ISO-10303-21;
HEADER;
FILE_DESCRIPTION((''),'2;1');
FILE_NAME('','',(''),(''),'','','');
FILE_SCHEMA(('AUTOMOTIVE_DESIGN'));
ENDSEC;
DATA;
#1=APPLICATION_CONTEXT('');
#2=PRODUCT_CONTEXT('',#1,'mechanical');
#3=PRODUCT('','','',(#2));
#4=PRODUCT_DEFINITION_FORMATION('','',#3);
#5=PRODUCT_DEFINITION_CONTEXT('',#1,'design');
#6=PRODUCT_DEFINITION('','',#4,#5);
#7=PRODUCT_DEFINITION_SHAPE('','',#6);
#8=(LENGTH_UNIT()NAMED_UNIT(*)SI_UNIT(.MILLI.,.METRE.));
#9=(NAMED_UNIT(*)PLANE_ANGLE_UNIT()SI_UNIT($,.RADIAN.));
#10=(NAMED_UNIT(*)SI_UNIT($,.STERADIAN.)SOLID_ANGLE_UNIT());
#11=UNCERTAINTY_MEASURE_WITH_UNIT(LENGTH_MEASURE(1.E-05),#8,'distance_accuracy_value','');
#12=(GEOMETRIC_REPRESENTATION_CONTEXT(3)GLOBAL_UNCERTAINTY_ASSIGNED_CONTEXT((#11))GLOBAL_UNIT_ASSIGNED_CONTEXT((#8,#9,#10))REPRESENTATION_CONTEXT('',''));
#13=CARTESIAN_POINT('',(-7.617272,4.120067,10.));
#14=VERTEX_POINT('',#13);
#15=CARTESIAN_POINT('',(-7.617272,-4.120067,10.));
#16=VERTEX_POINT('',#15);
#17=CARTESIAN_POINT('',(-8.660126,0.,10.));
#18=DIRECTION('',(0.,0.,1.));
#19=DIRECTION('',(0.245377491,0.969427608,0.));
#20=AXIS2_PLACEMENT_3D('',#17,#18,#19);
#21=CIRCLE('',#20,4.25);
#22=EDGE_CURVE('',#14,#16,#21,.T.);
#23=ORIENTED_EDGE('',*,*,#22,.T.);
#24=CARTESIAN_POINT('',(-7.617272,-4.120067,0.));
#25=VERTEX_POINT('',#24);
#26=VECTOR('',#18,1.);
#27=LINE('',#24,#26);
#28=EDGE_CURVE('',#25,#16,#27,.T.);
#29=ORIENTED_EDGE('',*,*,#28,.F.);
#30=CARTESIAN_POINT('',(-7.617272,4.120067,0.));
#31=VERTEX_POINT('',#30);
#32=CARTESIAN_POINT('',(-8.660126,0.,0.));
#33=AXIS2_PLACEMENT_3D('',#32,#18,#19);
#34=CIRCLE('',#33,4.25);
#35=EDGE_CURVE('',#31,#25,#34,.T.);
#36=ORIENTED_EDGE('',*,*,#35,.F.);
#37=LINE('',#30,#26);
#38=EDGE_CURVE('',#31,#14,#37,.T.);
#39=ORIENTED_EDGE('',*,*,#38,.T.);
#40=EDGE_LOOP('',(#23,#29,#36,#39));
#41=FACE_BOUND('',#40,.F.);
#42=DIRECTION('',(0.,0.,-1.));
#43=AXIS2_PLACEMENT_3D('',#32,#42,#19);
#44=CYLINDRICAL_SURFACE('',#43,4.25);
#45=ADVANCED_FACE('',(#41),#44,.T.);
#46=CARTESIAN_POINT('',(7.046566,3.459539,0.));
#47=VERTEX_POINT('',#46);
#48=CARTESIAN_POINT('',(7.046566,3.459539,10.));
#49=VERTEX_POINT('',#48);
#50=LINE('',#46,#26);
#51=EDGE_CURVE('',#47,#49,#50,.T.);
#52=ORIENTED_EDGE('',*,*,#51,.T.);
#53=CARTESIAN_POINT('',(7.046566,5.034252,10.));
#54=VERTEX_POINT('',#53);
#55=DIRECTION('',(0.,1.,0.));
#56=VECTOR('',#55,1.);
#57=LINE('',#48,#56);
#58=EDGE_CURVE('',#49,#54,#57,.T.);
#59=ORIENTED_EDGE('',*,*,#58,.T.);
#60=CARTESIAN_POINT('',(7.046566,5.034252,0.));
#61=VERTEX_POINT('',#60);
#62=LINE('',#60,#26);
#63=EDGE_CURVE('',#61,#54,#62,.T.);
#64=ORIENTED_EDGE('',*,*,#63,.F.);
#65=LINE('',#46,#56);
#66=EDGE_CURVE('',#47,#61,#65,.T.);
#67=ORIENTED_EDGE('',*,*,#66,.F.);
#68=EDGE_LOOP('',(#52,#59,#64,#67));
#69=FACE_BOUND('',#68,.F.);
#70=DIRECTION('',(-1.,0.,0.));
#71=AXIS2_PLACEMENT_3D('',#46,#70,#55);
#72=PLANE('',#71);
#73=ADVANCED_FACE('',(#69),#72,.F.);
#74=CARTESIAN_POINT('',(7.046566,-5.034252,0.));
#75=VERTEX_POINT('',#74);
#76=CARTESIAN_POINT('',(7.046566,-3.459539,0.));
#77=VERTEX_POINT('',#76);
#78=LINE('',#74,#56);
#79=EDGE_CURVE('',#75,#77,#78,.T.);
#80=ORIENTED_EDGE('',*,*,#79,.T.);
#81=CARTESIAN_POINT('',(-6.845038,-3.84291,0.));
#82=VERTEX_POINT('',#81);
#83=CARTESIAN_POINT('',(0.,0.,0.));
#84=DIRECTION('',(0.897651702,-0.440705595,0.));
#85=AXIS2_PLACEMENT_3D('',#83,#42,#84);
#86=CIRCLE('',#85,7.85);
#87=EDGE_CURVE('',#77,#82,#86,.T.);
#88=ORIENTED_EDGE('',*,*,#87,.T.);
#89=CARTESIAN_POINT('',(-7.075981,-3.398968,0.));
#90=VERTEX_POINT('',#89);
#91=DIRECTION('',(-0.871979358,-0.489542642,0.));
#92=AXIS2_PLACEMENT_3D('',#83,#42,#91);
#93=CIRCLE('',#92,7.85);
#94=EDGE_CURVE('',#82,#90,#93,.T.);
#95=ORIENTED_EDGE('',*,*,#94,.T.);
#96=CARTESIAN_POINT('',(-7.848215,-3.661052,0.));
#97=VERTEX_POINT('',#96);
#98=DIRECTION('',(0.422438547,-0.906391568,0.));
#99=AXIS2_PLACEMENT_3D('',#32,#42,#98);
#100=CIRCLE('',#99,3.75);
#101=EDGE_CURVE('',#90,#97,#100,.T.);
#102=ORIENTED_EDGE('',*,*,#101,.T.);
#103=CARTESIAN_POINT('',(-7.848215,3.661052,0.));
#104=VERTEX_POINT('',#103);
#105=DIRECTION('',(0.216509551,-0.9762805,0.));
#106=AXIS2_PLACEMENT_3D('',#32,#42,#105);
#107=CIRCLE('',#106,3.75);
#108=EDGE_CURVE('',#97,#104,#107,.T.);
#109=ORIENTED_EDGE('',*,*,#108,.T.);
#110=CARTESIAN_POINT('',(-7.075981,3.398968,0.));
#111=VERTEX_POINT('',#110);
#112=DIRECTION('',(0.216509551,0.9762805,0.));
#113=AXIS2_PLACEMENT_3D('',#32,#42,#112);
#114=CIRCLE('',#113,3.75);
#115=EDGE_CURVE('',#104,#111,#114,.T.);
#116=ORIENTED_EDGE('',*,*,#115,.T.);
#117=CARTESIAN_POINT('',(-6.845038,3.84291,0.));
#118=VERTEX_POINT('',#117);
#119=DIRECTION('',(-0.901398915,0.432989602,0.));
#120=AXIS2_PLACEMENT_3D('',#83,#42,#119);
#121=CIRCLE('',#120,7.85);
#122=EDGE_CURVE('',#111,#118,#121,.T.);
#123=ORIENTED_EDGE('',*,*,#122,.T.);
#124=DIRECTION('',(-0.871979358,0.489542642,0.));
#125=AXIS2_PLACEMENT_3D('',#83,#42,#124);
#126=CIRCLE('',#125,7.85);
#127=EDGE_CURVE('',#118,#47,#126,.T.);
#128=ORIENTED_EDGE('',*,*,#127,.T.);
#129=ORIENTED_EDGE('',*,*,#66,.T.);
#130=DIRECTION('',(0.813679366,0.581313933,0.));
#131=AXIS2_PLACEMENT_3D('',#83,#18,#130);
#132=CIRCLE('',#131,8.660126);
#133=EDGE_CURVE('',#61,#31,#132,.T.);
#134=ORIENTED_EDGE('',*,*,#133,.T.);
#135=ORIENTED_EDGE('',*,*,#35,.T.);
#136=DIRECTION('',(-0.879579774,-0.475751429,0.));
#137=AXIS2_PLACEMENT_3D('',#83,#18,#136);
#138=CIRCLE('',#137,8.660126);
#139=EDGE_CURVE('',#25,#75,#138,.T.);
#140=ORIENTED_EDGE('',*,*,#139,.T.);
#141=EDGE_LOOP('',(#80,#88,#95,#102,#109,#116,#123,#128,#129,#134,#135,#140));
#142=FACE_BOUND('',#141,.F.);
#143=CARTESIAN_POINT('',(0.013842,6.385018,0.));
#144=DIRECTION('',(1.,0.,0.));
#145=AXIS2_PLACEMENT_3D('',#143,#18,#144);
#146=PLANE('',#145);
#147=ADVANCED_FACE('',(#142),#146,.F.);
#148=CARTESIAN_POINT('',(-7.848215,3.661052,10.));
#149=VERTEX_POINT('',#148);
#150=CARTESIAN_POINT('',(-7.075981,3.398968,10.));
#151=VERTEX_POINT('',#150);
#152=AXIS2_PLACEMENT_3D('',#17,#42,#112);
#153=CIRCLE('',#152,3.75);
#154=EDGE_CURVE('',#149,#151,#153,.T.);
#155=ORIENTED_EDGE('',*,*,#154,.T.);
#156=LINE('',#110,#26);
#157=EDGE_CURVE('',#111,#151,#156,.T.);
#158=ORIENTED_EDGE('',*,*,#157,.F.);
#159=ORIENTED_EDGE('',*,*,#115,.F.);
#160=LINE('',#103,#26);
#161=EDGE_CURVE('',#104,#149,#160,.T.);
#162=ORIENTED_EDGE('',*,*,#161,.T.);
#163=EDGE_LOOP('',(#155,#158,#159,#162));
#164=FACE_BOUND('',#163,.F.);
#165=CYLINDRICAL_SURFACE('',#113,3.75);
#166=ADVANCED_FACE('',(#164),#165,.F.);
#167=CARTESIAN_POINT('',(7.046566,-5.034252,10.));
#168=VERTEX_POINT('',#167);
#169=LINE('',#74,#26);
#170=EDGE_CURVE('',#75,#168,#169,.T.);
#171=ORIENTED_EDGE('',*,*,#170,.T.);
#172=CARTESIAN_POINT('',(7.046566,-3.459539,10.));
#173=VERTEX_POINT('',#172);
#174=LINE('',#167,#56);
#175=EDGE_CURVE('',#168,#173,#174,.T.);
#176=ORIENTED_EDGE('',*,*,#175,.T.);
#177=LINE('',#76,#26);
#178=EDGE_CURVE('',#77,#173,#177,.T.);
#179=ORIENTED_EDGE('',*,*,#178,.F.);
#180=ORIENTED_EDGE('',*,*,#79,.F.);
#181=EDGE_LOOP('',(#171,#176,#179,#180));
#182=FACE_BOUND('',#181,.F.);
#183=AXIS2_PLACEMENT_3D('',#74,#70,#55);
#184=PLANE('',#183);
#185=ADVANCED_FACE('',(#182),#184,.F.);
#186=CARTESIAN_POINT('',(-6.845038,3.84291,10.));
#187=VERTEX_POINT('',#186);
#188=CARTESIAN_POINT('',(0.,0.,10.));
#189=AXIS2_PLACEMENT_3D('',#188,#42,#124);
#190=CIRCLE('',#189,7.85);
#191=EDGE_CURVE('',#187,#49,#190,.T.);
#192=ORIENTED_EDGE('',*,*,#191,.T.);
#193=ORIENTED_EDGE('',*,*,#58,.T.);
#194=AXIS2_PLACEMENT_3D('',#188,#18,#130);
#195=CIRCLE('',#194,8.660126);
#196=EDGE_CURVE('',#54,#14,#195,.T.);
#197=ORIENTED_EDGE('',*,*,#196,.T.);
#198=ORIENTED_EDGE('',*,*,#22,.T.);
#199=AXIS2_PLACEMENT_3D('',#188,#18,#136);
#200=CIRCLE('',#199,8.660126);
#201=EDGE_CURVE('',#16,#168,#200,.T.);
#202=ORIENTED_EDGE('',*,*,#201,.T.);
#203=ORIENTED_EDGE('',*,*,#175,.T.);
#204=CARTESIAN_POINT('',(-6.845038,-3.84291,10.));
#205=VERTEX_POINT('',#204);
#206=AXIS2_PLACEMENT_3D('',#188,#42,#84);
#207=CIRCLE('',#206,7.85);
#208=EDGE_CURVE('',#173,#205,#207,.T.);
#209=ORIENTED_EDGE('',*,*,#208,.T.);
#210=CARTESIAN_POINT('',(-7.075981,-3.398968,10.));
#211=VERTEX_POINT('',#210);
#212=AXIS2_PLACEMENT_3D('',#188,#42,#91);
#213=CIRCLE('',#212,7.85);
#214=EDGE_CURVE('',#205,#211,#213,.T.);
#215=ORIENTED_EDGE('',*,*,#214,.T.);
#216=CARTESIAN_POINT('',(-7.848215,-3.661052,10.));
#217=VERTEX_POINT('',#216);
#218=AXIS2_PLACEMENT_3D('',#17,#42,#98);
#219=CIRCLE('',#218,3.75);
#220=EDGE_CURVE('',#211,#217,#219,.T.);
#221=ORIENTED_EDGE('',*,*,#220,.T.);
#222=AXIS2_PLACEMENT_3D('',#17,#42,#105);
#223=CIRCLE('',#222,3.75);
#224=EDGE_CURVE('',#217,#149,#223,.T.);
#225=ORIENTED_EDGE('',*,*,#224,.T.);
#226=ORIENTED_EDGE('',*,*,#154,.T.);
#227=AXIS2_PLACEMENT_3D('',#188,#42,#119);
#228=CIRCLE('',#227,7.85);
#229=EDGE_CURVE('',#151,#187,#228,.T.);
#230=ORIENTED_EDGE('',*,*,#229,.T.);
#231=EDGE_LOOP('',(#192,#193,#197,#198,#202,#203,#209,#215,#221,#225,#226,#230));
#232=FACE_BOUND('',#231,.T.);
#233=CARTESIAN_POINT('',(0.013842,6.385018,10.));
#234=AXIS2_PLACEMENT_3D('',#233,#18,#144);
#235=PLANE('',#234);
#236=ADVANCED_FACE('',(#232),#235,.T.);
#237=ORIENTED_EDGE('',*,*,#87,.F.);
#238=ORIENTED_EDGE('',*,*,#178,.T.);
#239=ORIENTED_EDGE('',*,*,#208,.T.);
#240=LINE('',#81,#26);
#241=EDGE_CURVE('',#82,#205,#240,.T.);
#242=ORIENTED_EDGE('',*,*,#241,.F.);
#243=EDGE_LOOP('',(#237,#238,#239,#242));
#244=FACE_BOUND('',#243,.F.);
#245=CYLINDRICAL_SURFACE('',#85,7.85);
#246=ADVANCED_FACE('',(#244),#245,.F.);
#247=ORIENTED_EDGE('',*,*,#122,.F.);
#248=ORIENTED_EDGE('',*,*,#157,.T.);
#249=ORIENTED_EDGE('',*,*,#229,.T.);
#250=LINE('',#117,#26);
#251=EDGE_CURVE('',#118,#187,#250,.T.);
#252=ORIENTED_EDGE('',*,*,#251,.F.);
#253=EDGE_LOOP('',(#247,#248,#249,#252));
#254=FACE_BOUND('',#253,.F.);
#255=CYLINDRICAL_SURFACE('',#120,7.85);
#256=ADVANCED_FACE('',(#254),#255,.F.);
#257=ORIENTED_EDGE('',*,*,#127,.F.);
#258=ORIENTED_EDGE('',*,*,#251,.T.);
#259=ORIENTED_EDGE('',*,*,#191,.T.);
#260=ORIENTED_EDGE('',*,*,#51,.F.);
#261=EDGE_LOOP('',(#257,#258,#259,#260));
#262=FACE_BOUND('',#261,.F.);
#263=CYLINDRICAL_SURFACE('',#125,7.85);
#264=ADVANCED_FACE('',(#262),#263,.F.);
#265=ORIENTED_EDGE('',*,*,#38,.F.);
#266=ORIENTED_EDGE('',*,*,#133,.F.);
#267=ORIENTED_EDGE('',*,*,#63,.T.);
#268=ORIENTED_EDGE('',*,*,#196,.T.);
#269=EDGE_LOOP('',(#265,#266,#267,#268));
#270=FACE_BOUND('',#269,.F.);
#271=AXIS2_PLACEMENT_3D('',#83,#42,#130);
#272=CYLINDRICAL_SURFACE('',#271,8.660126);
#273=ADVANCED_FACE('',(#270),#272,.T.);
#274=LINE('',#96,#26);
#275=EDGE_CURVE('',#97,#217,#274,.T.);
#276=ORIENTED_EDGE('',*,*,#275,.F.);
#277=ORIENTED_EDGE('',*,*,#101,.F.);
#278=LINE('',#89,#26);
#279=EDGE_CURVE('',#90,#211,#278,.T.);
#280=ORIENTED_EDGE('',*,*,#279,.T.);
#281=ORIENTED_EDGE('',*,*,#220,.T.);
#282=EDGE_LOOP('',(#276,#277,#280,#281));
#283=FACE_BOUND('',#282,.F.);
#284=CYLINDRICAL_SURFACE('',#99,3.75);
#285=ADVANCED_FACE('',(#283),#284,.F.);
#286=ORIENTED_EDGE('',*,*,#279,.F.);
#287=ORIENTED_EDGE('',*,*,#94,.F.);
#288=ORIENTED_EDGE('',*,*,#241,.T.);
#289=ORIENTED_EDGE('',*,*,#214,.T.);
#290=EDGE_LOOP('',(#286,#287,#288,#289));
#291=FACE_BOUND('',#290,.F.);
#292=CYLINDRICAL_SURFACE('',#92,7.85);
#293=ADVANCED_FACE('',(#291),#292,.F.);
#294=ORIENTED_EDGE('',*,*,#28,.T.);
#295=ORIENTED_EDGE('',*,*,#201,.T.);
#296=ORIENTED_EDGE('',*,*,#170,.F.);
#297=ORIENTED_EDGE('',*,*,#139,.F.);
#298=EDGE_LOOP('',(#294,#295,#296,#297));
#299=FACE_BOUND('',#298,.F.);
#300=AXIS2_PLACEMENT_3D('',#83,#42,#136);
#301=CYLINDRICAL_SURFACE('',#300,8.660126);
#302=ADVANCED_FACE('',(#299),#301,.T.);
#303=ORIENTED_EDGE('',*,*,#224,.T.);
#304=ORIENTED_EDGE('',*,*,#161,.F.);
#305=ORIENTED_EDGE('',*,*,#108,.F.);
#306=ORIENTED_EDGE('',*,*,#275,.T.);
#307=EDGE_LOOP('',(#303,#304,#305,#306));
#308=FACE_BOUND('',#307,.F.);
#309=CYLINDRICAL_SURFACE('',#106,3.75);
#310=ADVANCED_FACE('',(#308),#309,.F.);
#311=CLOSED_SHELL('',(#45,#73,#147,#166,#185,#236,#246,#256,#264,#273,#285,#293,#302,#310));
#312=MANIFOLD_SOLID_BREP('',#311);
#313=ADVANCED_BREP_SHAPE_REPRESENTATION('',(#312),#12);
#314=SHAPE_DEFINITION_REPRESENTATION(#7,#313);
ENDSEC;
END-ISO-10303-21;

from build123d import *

# Parameters (mm, degrees)
F1_DEPTH = 10
F6_DEPTH = 10


# Not quite as in the source:
# - a feature names something its author has since deleted; it is built from what else it names


with BuildPart() as f1:
    # F0 (on Top) → F1 (new body)
    with BuildSketch(Plane.XY):
        with BuildLine():
            ThreePointArc((-7.0759814838, 3.3989683789), (-6.9640481468, 3.6227797903), (-6.8450379627, 3.8429097425))
            ThreePointArc((-6.8450379627, 3.8429097425), (-7.2244510067, 4.0001671481), (-7.6172716975, 4.1200673333))
            ThreePointArc((-7.6172716975, 4.1200673333), (-7.7361486016, 3.8922728268), (-7.8482152186, 3.6610518743))
            ThreePointArc((-7.8482152186, 3.6610518743), (-7.4549529061, 3.5510643093), (-7.0759814838, 3.3989683789))
        make_face()
        with BuildLine():
            ThreePointArc((-7.6172716975, -4.1200673333), (-7.2244510067, -4.0001671481), (-6.8450379627, -3.8429097425))
            ThreePointArc((-6.8450379627, -3.8429097425), (-6.9640481468, -3.6227797903), (-7.0759814838, -3.3989683789))
            ThreePointArc((-7.0759814838, -3.3989683789), (-7.4549529061, -3.5510643093), (-7.8482152186, -3.6610518743))
            ThreePointArc((-7.8482152186, -3.6610518743), (-7.7361486016, -3.8922728268), (-7.6172716975, -4.1200673333))
        make_face()
        with BuildLine():
            ThreePointArc((-7.8482152186, 3.6610518743), (-7.7361486016, 3.8922728268), (-7.6172716975, 4.1200673333))
            ThreePointArc((-7.6172716975, 4.1200673333), (-12.9101260351, 0), (-7.6172716975, -4.1200673333))
            ThreePointArc((-7.6172716975, -4.1200673333), (-7.7361486016, -3.8922728268), (-7.8482152186, -3.6610518743))
            ThreePointArc((-7.8482152186, -3.6610518743), (-12.4101260351, 0), (-7.8482152186, 3.6610518743))
        make_face()
    extrude(amount=F1_DEPTH)


with BuildPart() as f2_1:
    # F2: copy of F1
    add(f1.part.moved(Location((-14.3, 0, 0))))


with BuildPart() as f3_1:
    # F3: copy of F2_1
    add(f2_1.part.moved(Location((-13, 0, 0))))


with BuildPart() as f1_1:
    add(f1.part)

    # F0 (on Top) → F6 (join)
    with BuildSketch(Plane.XY):
        with BuildLine():
            ThreePointArc((-6.8450379627, 3.8429097425), (0.2165563909, 7.8470123824), (7.0465658628, 3.4595389203))
            Line((7.0465658628, 3.4595389203), (7.0465658628, 5.0342519291))
            ThreePointArc((7.0465658628, 5.0342519291), (-0.5388503097, 8.6433456073), (-7.6172716975, 4.1200673333))
            ThreePointArc((-7.6172716975, 4.1200673333), (-7.2244510067, 4.0001671481), (-6.8450379627, 3.8429097425))
        make_face()
        with BuildLine():
            Line((7.0465658628, -5.0342519291), (7.0465658628, -3.4595389203))
            ThreePointArc((7.0465658628, -3.4595389203), (0.2165563909, -7.8470123824), (-6.8450379627, -3.8429097425))
            ThreePointArc((-6.8450379627, -3.8429097425), (-7.2244510067, -4.0001671481), (-7.6172716975, -4.1200673333))
            ThreePointArc((-7.6172716975, -4.1200673333), (-0.5388503097, -8.6433456073), (7.0465658628, -5.0342519291))
        make_face()
        with BuildLine():
            ThreePointArc((-7.0759814838, 3.3989683789), (-6.9640481468, 3.6227797903), (-6.8450379627, 3.8429097425))
            ThreePointArc((-6.8450379627, 3.8429097425), (-7.2244510067, 4.0001671481), (-7.6172716975, 4.1200673333))
            ThreePointArc((-7.6172716975, 4.1200673333), (-7.7361486016, 3.8922728268), (-7.8482152186, 3.6610518743))
            ThreePointArc((-7.8482152186, 3.6610518743), (-7.4549529061, 3.5510643093), (-7.0759814838, 3.3989683789))
        make_face()
        with BuildLine():
            ThreePointArc((-7.6172716975, -4.1200673333), (-7.2244510067, -4.0001671481), (-6.8450379627, -3.8429097425))
            ThreePointArc((-6.8450379627, -3.8429097425), (-6.9640481468, -3.6227797903), (-7.0759814838, -3.3989683789))
            ThreePointArc((-7.0759814838, -3.3989683789), (-7.4549529061, -3.5510643093), (-7.8482152186, -3.6610518743))
            ThreePointArc((-7.8482152186, -3.6610518743), (-7.7361486016, -3.8922728268), (-7.6172716975, -4.1200673333))
        make_face()
    extrude(amount=F6_DEPTH)


with BuildPart() as f7_1:
    # F7: copy of F1
    add(f1_1.part.moved(Location((-22.5, 0, 0))))


with BuildPart() as f8_1:
    # F8: copy of F1
    add(f1_1.part.moved(Location((0, 18.6, 0))))


with BuildPart() as f9_1:
    # F9: copy of F7_1
    add(f7_1.part.moved(Location((0, 20.1, 0))))


with BuildPart() as f10_1:
    # F10: copy of F7_1
    add(f7_1.part.moved(Location((0, -19.2, 0))))


with BuildPart() as f11_1:
    # F11: copy of F1
    add(f1_1.part.moved(Location((0, -19.5, 0))))


with BuildPart() as f12_1:
    # F12: copy of F1
    add(f1_1.part.moved(Location((25.2, 0, 0))))


solid = f1_1.part
